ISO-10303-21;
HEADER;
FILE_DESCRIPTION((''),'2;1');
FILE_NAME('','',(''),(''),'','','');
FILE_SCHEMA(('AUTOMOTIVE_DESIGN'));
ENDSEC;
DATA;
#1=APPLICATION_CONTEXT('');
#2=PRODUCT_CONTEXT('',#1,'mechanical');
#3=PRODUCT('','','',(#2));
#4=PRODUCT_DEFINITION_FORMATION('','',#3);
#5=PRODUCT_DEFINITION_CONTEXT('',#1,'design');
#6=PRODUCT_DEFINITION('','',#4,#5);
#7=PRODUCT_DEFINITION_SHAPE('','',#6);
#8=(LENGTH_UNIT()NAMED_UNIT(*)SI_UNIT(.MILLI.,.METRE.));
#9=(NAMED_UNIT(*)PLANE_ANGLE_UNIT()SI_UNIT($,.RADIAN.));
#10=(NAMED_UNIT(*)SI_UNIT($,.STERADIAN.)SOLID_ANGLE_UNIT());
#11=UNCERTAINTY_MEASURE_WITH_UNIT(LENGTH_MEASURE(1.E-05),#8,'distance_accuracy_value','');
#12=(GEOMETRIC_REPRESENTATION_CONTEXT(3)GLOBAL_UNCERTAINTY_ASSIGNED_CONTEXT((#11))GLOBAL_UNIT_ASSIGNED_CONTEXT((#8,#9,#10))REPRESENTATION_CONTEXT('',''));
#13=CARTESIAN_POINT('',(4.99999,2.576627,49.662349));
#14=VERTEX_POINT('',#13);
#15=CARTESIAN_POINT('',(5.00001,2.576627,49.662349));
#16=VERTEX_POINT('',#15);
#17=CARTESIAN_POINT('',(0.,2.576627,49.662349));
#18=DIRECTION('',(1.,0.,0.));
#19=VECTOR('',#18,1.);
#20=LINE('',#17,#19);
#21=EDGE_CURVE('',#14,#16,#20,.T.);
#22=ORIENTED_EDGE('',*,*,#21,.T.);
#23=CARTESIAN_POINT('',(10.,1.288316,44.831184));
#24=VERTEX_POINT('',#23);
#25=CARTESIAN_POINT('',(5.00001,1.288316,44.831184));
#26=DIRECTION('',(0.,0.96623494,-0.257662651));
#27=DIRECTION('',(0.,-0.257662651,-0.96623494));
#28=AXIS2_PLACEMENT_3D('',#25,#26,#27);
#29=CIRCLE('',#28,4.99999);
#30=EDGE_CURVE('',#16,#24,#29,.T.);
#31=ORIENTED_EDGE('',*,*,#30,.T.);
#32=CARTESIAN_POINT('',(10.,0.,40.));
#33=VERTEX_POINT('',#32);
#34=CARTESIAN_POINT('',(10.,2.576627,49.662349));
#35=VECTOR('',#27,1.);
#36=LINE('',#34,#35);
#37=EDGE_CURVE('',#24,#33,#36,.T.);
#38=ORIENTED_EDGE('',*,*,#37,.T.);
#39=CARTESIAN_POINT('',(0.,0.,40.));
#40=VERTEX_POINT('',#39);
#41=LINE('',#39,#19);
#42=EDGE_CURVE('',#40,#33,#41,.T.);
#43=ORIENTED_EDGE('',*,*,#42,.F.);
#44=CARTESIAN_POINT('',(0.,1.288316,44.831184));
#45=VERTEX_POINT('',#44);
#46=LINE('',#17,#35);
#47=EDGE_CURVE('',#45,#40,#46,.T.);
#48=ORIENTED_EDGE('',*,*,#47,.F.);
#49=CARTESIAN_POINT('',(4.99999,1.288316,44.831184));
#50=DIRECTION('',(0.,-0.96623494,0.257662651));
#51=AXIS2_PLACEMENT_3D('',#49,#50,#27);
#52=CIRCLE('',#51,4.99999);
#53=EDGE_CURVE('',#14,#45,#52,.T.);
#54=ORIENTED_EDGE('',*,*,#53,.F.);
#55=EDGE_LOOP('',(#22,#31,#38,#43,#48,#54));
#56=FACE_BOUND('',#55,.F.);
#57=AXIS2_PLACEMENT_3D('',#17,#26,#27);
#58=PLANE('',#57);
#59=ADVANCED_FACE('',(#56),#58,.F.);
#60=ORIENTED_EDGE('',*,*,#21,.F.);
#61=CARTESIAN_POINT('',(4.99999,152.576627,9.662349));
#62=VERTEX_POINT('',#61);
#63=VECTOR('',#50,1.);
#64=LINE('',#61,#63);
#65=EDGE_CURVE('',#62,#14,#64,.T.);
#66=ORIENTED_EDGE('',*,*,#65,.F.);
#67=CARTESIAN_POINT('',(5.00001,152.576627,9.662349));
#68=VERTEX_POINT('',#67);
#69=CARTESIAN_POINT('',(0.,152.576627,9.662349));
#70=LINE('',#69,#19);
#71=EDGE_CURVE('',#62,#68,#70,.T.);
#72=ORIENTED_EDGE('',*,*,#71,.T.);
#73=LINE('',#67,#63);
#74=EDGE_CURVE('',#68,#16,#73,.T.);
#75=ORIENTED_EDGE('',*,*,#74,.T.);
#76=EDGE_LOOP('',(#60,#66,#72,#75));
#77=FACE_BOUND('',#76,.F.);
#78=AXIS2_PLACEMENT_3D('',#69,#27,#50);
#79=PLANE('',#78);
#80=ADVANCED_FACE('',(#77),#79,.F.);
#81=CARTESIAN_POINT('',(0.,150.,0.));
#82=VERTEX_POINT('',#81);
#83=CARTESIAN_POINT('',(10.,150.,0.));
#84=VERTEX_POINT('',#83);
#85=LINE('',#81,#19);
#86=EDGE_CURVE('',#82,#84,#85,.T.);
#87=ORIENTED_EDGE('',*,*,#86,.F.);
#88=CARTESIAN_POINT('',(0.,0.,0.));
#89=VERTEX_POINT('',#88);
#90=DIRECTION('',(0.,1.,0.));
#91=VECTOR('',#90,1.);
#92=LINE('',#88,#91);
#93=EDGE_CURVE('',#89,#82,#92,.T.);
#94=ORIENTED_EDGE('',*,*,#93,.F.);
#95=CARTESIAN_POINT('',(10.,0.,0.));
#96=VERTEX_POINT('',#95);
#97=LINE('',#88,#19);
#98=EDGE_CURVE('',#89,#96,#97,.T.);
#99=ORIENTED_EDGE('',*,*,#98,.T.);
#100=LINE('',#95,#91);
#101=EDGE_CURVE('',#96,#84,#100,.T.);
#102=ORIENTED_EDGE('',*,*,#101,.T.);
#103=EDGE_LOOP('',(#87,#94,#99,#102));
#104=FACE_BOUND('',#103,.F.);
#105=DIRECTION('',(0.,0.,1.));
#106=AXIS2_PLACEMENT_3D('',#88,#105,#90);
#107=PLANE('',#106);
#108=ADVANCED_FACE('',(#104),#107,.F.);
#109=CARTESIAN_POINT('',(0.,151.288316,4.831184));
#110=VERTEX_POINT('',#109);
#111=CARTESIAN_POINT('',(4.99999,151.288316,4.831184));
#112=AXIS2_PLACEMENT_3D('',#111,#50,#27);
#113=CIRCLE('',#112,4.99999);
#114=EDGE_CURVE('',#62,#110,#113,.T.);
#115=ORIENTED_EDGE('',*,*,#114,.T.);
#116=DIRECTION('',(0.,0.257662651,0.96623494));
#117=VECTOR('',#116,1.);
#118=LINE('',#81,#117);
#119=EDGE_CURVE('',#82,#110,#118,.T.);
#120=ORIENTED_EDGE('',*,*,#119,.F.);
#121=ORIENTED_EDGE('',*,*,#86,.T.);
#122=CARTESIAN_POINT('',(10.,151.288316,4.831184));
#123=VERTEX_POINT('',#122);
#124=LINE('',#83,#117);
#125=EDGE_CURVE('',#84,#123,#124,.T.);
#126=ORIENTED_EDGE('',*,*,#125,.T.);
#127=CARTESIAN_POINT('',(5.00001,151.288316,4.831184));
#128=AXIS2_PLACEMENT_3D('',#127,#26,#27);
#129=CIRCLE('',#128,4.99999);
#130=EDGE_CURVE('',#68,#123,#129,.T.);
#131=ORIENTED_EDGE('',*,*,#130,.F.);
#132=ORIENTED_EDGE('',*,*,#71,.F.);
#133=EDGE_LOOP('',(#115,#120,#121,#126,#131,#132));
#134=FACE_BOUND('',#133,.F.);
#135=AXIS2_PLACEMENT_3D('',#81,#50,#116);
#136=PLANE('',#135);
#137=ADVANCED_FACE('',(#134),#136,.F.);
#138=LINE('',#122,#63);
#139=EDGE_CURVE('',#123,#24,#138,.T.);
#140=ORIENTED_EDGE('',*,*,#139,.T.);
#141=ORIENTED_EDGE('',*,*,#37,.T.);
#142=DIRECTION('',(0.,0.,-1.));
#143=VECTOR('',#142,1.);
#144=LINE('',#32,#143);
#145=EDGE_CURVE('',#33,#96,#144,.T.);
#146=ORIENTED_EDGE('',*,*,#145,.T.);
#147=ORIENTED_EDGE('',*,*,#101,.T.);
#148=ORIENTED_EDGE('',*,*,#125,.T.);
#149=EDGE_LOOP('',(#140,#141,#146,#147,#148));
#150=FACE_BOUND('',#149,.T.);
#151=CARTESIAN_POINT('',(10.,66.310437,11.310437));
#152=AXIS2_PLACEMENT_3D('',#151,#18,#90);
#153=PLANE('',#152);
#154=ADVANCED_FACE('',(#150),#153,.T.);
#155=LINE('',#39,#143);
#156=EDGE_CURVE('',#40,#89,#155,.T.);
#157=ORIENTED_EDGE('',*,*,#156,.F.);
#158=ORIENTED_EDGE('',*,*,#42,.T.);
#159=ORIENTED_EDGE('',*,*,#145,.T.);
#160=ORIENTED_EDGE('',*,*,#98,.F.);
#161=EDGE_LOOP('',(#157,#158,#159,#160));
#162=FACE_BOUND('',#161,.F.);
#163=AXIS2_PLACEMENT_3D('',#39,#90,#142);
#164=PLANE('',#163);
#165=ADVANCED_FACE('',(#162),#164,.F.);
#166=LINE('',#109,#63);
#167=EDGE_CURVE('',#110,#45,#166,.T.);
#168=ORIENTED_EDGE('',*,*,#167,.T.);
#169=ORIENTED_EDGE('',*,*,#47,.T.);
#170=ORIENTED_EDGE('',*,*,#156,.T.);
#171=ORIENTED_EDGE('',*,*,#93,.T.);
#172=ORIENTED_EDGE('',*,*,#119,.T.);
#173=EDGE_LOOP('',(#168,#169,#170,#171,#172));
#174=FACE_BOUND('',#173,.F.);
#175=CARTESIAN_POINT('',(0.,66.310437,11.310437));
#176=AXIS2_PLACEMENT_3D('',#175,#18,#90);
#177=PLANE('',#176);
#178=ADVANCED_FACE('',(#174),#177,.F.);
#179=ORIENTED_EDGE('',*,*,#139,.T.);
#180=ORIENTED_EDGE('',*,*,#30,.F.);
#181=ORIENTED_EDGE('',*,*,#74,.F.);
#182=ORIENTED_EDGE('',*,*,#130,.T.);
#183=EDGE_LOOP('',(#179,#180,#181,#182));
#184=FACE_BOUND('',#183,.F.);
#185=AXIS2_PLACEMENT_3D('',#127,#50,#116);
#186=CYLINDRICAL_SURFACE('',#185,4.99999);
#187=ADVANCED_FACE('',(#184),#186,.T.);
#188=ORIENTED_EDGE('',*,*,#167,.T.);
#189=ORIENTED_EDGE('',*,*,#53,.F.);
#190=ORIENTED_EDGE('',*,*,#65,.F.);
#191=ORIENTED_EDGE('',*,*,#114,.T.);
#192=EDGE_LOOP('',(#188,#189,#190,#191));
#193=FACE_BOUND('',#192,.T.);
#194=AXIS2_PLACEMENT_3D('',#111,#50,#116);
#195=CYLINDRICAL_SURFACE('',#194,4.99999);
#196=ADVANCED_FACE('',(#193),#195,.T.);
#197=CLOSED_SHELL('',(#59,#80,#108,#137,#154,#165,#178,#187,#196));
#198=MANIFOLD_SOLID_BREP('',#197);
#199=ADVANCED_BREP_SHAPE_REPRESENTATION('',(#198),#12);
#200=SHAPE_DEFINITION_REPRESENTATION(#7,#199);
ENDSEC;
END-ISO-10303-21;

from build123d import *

# Parameters (mm, degrees)
F1_DEPTH = 10
F2_R     = 4.99999


# Not quite as in the source:
# - a fillet or chamfer is up to 0.001 mm smaller than in the source, because OpenCascade refuses the exact size


with BuildPart() as f1:
    # F0 (on Right) → F1 (new body)
    with BuildSketch(Plane.YZ):
        Polygon((0, 40), (0, 0), (150, 0), align=None)
        Polygon((2.5766265056, 49.662349396), (0, 40), (150, 0), (152.5766265056, 9.662349396), align=None)
    extrude(amount=F1_DEPTH)

    # F2 (radius 5 in the source; OpenCascade refuses exactly that, so slightly less here)
    f2_edges = [f1.edges().sort_by_distance(p)[0] for p in [
        (0, 77.576627, 29.662349),
        (10, 77.576627, 29.662349),
    ]]
    fillet(f2_edges, radius=F2_R)


solid = f1.part
